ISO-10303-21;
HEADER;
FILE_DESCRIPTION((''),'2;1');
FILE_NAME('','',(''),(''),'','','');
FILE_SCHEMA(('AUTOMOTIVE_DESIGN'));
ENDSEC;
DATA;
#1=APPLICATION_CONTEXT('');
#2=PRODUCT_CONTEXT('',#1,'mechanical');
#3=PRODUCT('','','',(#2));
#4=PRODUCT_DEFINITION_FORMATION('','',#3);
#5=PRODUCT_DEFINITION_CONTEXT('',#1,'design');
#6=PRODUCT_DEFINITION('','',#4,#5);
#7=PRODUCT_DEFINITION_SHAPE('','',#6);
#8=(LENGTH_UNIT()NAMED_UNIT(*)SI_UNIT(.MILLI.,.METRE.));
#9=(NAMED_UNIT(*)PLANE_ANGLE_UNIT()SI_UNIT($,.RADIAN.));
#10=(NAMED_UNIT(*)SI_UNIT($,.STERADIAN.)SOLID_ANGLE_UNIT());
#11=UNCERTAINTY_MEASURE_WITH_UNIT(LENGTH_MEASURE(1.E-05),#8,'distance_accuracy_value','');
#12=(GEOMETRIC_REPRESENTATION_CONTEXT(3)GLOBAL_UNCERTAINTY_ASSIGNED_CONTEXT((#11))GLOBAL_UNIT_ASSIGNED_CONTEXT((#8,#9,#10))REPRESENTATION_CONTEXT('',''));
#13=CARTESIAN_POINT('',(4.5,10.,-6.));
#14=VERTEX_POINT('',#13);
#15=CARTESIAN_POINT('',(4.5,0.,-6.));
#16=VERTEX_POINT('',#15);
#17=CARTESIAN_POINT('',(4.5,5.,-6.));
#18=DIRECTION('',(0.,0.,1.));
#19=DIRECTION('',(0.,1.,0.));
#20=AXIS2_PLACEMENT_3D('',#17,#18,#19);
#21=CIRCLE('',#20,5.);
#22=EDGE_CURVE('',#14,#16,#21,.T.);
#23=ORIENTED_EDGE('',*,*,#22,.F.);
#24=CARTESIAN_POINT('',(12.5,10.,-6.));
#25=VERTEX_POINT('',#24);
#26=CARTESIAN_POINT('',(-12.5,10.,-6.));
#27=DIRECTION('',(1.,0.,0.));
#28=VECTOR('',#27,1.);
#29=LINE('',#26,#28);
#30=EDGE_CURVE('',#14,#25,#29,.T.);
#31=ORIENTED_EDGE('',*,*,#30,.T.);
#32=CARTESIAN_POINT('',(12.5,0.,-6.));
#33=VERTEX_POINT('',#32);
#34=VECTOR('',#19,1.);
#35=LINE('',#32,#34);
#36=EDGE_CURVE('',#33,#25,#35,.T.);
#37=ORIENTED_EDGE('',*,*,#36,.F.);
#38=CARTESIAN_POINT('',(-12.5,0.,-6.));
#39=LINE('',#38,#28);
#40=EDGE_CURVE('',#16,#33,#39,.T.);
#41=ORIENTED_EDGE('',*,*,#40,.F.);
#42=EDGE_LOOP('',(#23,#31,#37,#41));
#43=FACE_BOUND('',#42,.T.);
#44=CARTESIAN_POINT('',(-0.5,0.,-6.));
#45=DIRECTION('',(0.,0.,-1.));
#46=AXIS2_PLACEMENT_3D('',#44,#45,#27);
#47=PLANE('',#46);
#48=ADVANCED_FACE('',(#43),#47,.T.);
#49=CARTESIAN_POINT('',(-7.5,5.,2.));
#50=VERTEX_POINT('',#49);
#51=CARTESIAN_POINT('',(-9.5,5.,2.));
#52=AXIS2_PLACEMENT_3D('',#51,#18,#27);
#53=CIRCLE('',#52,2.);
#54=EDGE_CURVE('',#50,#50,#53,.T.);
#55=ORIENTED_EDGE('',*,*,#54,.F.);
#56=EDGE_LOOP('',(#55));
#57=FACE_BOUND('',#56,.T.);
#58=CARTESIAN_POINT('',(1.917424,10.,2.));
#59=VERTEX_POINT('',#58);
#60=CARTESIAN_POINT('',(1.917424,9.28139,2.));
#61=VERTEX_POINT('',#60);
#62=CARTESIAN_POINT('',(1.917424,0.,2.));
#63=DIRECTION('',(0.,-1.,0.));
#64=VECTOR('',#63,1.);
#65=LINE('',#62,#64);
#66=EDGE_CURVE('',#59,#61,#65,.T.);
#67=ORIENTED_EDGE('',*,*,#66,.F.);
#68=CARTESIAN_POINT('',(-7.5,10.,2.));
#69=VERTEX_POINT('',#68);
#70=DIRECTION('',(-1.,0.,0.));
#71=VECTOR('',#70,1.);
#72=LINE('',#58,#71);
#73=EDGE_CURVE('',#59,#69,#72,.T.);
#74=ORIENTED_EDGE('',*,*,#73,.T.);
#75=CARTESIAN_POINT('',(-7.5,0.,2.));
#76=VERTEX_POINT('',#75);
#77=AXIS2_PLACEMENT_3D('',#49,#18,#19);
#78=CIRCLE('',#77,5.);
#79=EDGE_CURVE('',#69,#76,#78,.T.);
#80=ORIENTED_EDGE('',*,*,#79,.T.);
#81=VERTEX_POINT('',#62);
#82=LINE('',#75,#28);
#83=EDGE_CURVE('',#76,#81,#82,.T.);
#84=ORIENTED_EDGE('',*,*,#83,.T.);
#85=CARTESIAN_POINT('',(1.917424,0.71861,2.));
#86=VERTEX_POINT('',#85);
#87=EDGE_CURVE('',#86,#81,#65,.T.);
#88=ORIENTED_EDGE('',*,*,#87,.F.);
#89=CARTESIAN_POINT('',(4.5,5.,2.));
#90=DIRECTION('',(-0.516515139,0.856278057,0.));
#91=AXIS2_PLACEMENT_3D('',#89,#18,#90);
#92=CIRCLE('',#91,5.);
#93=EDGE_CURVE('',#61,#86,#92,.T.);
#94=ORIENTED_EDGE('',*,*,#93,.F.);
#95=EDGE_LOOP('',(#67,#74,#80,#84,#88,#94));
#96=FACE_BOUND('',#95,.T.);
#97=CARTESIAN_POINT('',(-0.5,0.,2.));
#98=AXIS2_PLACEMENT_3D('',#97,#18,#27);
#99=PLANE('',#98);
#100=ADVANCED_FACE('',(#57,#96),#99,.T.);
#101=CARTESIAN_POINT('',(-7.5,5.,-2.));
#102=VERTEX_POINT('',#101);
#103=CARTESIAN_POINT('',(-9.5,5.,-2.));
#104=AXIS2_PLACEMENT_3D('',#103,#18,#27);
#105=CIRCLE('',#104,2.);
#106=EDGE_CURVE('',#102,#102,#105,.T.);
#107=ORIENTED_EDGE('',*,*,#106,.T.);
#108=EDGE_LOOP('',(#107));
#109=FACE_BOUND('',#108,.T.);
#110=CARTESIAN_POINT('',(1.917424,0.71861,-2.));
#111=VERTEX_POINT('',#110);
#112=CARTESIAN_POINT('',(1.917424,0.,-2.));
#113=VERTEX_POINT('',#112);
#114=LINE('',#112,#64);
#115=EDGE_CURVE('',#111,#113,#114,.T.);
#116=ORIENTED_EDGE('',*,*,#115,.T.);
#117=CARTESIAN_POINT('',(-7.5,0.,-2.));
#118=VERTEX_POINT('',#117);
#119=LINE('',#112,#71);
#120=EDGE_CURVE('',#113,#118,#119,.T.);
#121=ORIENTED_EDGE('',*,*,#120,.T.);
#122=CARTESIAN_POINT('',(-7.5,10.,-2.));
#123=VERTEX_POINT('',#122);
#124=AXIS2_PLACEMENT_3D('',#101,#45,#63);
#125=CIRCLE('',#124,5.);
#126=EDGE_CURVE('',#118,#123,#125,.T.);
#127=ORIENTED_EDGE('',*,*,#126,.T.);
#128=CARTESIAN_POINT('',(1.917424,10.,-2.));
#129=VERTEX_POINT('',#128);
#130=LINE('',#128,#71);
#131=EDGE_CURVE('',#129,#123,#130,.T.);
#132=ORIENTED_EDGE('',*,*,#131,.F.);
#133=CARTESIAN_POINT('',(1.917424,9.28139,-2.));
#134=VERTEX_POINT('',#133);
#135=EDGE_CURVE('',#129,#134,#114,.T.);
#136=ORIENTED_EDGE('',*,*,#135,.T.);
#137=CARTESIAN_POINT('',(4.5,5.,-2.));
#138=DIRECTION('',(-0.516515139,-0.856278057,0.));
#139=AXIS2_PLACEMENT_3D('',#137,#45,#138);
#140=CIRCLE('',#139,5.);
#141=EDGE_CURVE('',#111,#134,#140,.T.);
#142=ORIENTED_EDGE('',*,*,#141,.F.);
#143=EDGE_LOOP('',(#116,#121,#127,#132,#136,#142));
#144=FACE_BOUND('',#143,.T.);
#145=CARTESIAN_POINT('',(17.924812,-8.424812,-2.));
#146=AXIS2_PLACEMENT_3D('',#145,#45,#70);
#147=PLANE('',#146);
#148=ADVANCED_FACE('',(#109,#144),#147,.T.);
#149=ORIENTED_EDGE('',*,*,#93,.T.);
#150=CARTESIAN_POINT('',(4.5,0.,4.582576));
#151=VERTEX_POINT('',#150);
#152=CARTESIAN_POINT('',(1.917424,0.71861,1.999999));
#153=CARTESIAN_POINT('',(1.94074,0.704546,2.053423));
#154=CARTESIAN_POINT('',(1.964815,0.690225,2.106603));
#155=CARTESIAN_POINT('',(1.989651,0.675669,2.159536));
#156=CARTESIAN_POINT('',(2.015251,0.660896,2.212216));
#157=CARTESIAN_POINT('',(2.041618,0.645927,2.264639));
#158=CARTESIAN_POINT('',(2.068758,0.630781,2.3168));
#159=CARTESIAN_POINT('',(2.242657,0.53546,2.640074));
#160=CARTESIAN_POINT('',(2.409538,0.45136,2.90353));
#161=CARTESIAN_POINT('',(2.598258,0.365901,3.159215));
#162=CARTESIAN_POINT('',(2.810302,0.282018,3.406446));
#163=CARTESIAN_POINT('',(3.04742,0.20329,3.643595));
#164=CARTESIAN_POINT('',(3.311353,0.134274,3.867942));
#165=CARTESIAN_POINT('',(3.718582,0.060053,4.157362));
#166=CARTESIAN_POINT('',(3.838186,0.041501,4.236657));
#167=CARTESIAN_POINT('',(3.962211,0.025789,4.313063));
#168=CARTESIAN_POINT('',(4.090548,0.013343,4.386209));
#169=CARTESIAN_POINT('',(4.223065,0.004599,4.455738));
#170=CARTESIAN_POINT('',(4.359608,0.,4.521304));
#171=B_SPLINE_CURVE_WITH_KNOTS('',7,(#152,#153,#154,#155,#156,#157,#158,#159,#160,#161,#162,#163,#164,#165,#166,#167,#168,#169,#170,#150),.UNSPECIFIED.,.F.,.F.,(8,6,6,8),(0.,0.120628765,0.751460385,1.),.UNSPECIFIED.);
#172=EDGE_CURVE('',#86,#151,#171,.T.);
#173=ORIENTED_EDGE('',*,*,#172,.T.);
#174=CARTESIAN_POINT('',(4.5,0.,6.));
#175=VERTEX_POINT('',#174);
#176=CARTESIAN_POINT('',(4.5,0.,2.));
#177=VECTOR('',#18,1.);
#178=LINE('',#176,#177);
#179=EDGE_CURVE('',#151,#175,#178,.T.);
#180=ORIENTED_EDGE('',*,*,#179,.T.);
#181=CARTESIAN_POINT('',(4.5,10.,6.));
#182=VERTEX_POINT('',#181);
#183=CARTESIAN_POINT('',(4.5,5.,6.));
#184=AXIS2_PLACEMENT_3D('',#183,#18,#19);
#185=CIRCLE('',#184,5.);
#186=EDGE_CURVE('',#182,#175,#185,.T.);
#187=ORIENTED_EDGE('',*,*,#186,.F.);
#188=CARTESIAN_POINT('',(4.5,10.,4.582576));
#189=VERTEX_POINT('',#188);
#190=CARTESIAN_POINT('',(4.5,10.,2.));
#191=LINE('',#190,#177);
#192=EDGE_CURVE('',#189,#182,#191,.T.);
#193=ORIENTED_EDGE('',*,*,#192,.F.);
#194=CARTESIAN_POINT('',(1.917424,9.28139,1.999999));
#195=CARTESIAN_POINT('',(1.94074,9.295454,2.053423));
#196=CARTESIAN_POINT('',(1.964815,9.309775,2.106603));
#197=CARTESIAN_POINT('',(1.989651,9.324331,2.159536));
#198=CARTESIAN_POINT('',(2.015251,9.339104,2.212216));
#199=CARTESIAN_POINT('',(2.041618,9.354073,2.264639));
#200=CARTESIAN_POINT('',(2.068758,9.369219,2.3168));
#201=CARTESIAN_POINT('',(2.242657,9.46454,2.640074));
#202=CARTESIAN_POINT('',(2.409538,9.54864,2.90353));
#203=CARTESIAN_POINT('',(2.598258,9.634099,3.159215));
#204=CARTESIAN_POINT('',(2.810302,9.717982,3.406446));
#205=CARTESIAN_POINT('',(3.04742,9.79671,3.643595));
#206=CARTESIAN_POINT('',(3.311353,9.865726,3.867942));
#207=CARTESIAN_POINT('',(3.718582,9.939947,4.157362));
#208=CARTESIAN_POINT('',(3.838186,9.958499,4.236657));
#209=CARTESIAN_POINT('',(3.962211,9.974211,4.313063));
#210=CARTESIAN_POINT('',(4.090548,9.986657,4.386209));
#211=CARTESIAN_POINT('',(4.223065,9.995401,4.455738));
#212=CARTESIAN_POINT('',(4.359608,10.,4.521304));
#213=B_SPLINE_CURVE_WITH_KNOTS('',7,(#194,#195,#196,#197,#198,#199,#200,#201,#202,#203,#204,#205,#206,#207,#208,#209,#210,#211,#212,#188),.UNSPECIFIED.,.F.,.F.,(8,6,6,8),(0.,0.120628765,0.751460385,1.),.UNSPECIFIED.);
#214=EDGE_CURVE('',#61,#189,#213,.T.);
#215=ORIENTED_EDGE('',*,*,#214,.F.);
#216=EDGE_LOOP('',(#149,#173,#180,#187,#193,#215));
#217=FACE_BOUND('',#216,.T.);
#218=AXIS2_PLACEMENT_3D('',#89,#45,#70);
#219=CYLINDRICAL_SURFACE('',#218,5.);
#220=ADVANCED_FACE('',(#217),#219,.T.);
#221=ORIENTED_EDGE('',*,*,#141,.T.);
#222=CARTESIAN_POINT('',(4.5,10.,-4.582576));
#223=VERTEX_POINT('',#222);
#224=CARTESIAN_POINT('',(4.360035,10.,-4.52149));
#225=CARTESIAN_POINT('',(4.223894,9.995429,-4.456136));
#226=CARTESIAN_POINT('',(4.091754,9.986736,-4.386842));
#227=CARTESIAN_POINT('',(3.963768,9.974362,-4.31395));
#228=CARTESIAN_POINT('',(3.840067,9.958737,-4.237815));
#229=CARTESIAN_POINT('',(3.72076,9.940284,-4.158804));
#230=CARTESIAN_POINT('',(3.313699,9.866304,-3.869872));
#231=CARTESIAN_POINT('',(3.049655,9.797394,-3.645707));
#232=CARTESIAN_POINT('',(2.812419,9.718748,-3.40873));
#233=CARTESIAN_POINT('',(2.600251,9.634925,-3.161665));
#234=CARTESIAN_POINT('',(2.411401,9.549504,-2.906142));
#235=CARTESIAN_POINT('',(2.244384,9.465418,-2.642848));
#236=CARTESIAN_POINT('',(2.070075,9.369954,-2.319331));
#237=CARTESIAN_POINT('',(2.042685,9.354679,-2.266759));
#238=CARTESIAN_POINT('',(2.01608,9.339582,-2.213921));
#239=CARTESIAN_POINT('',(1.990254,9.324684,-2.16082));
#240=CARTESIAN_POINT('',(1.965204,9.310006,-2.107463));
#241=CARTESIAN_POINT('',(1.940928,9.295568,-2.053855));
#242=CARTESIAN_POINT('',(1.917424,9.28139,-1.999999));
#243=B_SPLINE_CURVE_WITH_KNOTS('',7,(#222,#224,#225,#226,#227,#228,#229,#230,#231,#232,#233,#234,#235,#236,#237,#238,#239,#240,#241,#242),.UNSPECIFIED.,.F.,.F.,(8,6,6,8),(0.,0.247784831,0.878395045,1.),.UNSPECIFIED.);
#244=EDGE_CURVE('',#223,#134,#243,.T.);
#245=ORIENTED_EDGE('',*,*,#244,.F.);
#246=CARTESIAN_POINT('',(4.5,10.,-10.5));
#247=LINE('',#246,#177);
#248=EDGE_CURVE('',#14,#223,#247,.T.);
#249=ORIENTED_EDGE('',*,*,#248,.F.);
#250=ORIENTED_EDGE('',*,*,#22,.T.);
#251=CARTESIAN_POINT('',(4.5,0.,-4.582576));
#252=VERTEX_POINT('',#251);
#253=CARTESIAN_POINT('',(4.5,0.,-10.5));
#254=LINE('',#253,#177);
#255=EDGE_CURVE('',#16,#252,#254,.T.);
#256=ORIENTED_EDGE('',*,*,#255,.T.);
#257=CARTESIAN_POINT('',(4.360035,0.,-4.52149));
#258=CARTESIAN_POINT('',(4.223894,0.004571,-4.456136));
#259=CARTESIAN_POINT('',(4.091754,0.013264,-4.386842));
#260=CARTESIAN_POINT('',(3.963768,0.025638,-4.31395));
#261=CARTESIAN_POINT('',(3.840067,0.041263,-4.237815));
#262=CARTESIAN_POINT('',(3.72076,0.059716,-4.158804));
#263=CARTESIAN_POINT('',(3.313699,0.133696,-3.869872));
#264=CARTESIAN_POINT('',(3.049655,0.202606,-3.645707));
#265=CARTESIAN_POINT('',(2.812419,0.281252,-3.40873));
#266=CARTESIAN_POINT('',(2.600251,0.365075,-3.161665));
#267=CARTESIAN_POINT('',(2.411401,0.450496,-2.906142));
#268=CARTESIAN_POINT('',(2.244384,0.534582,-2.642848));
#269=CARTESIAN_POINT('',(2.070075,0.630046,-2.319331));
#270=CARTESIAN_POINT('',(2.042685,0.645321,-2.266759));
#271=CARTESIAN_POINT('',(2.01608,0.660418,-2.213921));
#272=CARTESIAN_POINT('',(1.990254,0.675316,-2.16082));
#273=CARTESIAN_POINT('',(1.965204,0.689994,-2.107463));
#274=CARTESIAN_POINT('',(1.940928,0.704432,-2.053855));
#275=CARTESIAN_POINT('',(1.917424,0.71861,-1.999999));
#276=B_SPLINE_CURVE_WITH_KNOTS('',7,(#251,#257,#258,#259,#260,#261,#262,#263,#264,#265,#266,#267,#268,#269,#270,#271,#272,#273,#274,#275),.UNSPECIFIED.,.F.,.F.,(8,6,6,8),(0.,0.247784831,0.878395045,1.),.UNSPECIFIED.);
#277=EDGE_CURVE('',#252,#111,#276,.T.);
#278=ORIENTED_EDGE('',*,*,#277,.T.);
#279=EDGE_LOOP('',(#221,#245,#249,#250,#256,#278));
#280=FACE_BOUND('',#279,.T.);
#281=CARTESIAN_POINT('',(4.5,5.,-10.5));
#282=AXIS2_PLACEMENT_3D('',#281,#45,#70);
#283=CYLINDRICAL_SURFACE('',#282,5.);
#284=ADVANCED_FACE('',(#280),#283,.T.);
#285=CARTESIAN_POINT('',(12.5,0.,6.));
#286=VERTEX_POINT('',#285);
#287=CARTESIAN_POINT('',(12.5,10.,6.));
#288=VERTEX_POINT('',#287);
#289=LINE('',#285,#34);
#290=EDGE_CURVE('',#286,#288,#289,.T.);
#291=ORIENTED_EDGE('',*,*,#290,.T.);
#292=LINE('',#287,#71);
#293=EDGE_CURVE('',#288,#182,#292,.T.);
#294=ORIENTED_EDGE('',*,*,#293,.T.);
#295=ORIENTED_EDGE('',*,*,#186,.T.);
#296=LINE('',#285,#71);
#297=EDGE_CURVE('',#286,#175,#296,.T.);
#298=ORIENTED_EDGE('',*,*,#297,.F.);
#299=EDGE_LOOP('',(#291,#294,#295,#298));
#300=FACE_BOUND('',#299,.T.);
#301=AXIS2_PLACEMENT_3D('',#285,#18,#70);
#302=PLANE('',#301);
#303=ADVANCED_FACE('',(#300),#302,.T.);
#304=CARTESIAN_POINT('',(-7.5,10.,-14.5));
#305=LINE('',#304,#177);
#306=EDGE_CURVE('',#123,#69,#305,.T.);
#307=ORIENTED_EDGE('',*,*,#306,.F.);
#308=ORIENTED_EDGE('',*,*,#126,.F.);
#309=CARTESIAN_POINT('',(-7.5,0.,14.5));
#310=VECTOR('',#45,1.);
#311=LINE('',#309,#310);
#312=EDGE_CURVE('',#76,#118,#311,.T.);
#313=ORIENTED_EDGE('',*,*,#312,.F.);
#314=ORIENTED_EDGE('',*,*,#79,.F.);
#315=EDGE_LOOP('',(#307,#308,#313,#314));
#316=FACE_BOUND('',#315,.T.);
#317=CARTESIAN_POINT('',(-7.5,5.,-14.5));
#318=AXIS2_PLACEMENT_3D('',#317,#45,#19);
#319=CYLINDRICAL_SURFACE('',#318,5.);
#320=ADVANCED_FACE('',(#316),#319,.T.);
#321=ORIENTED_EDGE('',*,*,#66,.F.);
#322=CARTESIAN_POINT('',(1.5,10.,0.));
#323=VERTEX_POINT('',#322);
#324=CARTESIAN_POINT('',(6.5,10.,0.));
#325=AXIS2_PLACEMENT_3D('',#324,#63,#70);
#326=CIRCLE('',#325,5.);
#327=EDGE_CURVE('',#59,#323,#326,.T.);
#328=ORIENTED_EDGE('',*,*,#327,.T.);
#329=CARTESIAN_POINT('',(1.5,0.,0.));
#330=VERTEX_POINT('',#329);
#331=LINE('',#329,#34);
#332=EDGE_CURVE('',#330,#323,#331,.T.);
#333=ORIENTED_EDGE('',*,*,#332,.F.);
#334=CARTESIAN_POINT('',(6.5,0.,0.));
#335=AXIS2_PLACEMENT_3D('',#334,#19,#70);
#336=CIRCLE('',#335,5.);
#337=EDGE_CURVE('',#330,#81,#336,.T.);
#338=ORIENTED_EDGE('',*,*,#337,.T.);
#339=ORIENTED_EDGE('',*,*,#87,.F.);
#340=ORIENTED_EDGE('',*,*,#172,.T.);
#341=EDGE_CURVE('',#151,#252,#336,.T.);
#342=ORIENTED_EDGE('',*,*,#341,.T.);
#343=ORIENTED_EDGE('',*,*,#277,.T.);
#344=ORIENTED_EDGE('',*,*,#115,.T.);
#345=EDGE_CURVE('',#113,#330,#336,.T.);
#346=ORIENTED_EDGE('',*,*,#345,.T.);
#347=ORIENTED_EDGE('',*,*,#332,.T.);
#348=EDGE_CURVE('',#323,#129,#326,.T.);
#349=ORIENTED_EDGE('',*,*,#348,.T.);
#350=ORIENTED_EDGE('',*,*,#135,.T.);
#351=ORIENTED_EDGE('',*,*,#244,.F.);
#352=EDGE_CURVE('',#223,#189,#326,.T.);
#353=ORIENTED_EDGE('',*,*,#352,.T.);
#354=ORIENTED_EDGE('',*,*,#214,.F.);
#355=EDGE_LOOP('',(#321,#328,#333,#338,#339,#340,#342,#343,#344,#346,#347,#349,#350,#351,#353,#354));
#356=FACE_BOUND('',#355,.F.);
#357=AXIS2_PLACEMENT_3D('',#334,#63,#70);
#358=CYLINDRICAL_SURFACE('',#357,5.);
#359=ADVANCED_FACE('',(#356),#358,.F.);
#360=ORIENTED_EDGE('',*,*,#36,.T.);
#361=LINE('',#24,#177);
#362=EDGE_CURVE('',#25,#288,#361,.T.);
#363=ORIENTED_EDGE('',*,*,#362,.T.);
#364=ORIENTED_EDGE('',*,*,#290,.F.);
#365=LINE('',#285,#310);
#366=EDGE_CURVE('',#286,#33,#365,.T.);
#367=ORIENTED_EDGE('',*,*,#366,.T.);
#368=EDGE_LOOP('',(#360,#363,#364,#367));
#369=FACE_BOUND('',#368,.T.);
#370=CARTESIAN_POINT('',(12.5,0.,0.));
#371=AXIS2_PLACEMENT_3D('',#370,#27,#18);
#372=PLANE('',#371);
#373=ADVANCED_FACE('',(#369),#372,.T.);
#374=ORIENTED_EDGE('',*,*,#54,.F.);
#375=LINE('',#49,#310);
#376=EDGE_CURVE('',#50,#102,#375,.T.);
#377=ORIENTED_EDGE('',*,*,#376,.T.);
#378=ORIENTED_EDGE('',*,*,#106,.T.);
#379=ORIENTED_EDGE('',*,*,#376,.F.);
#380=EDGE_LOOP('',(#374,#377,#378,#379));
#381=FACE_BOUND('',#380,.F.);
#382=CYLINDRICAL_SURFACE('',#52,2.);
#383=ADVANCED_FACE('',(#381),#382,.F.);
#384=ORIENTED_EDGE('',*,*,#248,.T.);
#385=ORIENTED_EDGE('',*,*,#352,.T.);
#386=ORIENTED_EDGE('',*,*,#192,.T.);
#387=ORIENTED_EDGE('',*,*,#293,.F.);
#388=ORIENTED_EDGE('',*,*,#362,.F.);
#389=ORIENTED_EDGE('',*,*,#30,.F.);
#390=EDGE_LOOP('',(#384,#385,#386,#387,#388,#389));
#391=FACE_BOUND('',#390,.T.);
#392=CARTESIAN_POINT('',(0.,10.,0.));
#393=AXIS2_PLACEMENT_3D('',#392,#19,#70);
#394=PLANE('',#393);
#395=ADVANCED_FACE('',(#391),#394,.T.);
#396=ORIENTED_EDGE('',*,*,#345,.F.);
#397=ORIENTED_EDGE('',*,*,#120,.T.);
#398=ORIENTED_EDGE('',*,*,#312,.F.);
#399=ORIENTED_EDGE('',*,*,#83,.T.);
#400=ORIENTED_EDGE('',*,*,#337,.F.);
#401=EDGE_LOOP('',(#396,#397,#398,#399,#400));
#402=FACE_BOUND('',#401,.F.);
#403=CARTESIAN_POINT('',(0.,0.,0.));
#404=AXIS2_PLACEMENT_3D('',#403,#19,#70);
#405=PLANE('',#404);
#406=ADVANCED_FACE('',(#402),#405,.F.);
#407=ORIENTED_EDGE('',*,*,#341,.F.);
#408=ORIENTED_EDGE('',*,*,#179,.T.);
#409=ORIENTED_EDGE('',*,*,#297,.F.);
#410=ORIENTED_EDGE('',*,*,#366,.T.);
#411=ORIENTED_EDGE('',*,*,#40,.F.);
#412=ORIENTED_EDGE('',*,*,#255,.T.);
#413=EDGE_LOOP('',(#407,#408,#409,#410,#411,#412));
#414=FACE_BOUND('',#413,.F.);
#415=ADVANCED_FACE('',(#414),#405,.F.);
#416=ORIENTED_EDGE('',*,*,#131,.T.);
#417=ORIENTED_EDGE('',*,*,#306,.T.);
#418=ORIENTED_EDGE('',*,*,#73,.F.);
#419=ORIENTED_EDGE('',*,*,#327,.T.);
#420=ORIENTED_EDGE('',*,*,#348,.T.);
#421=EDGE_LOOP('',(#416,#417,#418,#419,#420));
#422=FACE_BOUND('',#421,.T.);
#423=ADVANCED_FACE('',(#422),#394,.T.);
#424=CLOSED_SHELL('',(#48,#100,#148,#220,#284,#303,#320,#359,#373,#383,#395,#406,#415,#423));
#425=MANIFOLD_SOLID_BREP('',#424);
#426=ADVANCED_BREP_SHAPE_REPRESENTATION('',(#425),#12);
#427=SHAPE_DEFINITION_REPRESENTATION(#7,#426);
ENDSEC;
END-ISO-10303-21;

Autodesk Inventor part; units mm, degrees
ref_plane "YZ Plane" through (0, 0, 0) normal (1, 0, 0) x (0, 1, 0)
ref_plane "XZ Plane" through (0, 0, 0) normal (0, 1, 0) x (-1, 0, 0)
ref_plane "XY Plane" through (0, 0, 0) normal (0, 0, 1) x (1, 0, 0)
sketch "Szkic2" plane through (0, 0, 0) normal (0, 1, 0) x (-1, 0, 0)
  line L0 (-12.5, 6) -> (12.5, 6)
  line L1 (12.5, 6) -> (12.5, -6)
  line L2 (12.5, -6) -> (-12.5, -6)
  line L3 (-12.5, -6) -> (-12.5, 6)
  line L4 (-12.5, 6) -> (12.5, -6) construction
  line L5 (12.5, 6) -> (-12.5, -6) construction
  line L6 (-12.5, 0) -> (-6.5, 0)
  circle A0 centre (-6.5, 0) radius 5
  line L7 (12.5, 0) -> (12.5, 2)
  line L8 (12.5, 2) -> (0.5, 2)
  line L9 (0.5, 2) -> (0.5, 6)
  line L10 (12.5, -6) -> (12.5, 6)
  line L11 (12.5, -2) -> (0.5, -2)
  line L12 (0.5, -2) -> (0.5, -6)
  point P0 (0, 0)
  point P1 (0.5, -6)
  point P2 (12.5, -2)
  dimension "d11" = 25
  dimension "d12" = 12
  dimension "d13" = 6
  dimension "d14" = 10
  dimension "d15" = 2
  dimension "d16" = 12
extrude "Wyciągnięcie proste3" add sketch "Szkic2" along normal blind 10 contours L0 L9 L8 L1 L11 L12 L2 L3
sketch "Szkic3" plane through (-12.5, 0, 2) normal (0, 0, 1) x (1, 0, 0)
  line L0 (0, 0) -> (0, 10) projected
  line L1 (12, 0) -> (0, 0) projected
  line L2 (0, 10) -> (0, 0)
  line L3 (12, 0) -> (12, 10) projected
  circle A0 centre (3, 5) radius 2
  point P0 (12.5, 0)
  dimension "d19" = 4
  dimension "d23" = 9
extrude "Wyciągnięcie proste4" cut sketch "Szkic3" against normal blind 32.75
fillet "Zaokrąglenie1" radius 5 6 edges at (-12.5, 0, 0) (-12.5, 10, 0) (-0.5, 0, 4) (-0.5, 10, 4) (-0.5, 0, -4) (-0.5, 10, -4)
properties part number "Knee"
